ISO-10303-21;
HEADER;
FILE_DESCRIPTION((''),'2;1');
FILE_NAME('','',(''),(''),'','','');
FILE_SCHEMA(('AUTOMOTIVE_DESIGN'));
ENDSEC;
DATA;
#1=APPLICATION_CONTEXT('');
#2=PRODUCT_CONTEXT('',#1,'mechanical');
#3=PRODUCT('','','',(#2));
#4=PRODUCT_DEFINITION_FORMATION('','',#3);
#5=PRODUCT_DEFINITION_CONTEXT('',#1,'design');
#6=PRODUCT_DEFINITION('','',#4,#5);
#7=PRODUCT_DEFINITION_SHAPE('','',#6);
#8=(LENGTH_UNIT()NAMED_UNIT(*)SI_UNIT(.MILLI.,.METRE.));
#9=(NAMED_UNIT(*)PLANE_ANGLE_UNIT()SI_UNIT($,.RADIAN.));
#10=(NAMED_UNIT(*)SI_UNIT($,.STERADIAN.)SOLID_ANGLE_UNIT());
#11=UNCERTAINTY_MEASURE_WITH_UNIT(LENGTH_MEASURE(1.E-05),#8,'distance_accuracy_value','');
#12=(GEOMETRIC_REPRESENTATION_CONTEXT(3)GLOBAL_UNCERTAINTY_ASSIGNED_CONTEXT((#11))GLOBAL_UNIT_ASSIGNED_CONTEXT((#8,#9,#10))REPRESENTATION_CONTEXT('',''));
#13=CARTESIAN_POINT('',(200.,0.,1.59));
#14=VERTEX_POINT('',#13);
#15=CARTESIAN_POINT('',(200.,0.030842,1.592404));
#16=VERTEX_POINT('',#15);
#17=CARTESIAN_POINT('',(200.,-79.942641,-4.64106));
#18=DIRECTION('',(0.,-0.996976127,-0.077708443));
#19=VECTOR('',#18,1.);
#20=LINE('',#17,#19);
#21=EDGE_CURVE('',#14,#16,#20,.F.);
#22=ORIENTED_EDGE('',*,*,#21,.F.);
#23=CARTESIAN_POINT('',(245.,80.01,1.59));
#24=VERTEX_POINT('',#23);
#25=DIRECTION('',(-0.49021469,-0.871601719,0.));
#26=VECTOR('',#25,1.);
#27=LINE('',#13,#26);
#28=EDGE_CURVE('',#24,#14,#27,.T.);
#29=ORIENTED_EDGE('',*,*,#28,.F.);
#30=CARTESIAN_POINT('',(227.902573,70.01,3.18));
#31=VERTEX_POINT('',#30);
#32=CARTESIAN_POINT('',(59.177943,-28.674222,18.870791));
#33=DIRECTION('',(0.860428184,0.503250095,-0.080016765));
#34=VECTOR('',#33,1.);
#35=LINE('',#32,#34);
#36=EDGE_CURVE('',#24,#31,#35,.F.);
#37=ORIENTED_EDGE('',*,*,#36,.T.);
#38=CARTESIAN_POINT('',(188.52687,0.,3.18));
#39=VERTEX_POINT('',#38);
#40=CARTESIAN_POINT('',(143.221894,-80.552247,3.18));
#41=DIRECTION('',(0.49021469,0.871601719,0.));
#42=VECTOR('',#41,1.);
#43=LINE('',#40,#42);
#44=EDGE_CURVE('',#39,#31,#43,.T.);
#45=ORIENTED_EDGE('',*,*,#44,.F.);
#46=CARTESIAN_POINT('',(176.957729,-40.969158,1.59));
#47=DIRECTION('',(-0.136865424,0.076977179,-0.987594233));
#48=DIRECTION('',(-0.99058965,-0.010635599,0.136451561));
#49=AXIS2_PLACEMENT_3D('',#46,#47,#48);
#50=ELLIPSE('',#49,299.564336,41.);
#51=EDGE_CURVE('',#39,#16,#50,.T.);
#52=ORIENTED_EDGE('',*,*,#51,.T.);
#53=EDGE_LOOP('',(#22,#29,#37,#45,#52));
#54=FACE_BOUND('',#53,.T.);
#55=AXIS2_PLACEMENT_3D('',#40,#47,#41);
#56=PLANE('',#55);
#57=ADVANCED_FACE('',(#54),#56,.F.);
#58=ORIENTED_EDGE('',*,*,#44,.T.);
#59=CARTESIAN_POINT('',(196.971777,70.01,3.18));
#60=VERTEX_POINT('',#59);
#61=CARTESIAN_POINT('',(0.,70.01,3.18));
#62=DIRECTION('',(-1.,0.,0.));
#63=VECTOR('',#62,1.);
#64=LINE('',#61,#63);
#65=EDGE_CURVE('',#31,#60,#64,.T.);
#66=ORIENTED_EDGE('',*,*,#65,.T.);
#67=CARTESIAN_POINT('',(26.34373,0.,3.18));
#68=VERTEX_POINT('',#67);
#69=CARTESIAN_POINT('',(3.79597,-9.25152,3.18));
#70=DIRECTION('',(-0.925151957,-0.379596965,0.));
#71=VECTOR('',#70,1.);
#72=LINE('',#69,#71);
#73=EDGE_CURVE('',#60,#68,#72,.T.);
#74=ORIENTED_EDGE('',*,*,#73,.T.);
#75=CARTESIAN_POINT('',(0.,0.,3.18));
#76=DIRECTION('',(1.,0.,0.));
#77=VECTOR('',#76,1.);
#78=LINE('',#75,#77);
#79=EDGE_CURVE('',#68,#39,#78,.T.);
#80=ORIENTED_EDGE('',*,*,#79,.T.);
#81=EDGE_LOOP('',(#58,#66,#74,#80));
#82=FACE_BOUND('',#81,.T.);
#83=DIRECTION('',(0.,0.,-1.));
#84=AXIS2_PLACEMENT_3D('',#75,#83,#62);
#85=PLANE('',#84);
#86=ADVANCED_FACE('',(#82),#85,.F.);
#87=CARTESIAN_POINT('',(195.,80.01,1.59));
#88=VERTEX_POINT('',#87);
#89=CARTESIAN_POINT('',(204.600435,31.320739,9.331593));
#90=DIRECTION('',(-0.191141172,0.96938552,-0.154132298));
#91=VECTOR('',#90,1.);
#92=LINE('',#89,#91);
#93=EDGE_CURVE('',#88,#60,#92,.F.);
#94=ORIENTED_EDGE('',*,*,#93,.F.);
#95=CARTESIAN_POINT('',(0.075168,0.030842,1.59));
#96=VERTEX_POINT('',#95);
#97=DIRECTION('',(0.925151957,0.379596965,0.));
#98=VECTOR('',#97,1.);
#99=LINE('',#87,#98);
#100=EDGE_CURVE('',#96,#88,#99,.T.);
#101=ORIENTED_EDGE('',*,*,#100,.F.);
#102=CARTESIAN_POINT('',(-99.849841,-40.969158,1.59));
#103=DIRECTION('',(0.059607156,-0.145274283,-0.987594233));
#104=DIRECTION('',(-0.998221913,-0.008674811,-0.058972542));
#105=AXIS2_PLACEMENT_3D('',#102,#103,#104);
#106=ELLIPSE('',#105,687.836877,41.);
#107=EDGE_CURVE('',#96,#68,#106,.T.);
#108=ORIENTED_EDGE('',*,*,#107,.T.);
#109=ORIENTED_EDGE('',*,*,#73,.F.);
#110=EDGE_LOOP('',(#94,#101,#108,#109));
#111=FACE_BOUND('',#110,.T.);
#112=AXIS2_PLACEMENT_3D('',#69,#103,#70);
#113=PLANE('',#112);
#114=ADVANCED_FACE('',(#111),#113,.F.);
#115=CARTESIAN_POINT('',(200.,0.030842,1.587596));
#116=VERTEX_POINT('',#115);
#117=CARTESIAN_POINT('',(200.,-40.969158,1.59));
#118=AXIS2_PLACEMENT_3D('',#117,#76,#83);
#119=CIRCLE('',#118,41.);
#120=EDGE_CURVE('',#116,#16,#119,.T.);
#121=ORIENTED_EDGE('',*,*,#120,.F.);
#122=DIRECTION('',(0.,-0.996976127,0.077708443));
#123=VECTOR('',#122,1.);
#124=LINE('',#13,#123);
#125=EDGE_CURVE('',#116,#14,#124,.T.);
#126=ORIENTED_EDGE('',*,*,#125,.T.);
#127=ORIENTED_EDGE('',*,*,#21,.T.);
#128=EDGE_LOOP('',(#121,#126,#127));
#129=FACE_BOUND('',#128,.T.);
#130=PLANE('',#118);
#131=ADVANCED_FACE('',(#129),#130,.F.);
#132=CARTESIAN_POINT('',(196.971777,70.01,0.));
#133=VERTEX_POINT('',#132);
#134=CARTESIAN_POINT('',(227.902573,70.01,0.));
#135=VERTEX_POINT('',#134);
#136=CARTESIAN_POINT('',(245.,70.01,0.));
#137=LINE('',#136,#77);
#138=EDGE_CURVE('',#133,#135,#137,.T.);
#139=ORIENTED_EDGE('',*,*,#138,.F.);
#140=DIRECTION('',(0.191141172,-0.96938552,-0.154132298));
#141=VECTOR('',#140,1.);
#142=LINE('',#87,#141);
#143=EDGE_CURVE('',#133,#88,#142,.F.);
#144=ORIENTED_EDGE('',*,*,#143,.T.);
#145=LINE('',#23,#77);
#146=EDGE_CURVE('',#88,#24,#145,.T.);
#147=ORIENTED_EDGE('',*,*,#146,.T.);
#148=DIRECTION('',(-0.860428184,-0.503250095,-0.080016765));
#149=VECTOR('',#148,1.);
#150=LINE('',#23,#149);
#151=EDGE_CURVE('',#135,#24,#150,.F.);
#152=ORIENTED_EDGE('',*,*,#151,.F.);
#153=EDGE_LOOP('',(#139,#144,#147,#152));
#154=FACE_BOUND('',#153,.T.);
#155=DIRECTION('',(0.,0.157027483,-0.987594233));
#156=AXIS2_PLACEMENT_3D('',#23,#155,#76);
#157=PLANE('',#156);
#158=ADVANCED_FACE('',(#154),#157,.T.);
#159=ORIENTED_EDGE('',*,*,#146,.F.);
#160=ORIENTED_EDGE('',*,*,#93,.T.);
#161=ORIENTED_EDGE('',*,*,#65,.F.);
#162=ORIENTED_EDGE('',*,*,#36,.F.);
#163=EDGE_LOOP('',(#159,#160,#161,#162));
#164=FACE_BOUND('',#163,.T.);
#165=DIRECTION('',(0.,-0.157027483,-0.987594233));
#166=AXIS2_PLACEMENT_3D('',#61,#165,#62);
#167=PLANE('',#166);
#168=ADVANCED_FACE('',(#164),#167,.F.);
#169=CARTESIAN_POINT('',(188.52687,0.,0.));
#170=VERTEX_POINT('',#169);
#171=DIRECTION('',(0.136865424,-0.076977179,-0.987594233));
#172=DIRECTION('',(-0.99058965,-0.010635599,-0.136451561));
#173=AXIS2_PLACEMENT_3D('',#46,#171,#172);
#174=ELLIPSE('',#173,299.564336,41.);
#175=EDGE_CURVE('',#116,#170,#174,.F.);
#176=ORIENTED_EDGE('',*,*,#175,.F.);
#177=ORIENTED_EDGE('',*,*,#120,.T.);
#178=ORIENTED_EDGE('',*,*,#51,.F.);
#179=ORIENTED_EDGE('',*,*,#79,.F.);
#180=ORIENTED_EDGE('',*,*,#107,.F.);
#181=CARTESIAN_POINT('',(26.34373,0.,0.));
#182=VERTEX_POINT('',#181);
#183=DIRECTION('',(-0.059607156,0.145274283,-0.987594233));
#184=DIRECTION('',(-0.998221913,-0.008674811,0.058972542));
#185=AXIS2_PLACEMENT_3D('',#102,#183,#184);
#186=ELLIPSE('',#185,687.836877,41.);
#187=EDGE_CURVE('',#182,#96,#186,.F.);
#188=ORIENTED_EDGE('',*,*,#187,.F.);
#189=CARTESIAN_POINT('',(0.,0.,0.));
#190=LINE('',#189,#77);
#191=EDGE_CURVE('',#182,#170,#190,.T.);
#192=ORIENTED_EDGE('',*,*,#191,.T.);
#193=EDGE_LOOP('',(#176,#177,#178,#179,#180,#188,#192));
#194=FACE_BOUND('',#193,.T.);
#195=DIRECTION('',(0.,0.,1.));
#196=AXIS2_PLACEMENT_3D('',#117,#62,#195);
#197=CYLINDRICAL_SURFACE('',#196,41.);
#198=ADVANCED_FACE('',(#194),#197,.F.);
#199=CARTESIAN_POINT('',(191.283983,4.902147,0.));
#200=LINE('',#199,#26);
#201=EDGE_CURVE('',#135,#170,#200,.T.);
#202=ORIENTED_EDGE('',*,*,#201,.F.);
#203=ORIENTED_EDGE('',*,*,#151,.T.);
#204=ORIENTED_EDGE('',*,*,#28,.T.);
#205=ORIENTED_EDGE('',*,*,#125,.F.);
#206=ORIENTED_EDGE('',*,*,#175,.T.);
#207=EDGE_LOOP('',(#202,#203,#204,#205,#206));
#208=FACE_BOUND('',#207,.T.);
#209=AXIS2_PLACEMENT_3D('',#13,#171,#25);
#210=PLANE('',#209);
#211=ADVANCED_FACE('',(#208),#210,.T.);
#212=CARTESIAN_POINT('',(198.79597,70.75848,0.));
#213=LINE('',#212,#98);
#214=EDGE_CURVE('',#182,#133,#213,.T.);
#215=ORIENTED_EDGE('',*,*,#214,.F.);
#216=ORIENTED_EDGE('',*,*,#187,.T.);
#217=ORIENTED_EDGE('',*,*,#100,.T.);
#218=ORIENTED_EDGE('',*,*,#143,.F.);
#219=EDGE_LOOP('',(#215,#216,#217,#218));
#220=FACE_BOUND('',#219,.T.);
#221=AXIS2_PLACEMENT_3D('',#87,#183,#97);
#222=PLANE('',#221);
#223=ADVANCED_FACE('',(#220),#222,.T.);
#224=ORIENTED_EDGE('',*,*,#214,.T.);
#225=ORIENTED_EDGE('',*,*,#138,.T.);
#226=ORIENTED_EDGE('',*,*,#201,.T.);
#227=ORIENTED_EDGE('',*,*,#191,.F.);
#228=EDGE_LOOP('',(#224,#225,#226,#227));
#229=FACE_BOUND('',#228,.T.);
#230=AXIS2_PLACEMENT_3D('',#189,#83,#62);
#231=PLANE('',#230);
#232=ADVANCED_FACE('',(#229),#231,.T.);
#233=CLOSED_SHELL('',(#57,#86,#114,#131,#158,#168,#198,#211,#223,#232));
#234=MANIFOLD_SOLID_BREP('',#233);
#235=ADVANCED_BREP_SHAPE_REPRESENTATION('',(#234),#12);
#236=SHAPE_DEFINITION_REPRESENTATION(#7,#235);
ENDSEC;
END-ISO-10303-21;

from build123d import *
from OCP.BRepFilletAPI import BRepFilletAPI_MakeChamfer

# Parameters (mm, degrees)
BOSS_EXTRUDE1_DEPTH = 3.18
CHAMFER1_SIZE       = 1.59
CHAMFER1_SIZE2      = 10
CHAMFER2_SIZE       = 10
CHAMFER2_SIZE_2     = 1.59
SKETCH2_R           = 41
CUT_EXTRUDE1_DEPTH  = 200


with BuildPart() as part:
    # Sketch1 → Boss-Extrude1 (new body)
    with BuildSketch(Plane.XY):
        Polygon((0, 0), (200, 0), (245, 80.01), (195, 80.01), align=None)
    extrude(amount=BOSS_EXTRUDE1_DEPTH)

    # Chamfer1: one chamfer whose edges measure the first distance from different faces: ONE call of the kernel's chamfer builder (chamfer() names one face for all edges)
    chamfer1_edges_1 = [part.edges().sort_by_distance(p)[0] for p in [
        (222.5, 40.005, 3.18),
    ]]
    chamfer1_side_1 = [part.faces().sort_by_distance(p)[0] for p in [
        (222.5, 40.005, 1.59),
    ]]
    chamfer1_edges_2 = [part.edges().sort_by_distance(p)[0] for p in [
        (220, 80.01, 3.18),
    ]]
    chamfer1_side_2 = [part.faces().sort_by_distance(p)[0] for p in [
        (220, 80.01, 1.59),
    ]]
    chamfer1_edges_3 = [part.edges().sort_by_distance(p)[0] for p in [
        (97.5, 40.005, 3.18),
    ]]
    chamfer1_side_3 = [part.faces().sort_by_distance(p)[0] for p in [
        (97.5, 40.005, 1.59),
    ]]
    chamfer1 = BRepFilletAPI_MakeChamfer(part.part.solid().wrapped)
    for e in chamfer1_edges_1:
        chamfer1.Add(CHAMFER1_SIZE, CHAMFER1_SIZE2, e.wrapped, chamfer1_side_1[0].wrapped)  # the first distance lies on this face
    for e in chamfer1_edges_2:
        chamfer1.Add(CHAMFER1_SIZE, CHAMFER1_SIZE2, e.wrapped, chamfer1_side_2[0].wrapped)  # the first distance lies on this face
    for e in chamfer1_edges_3:
        chamfer1.Add(CHAMFER1_SIZE, CHAMFER1_SIZE2, e.wrapped, chamfer1_side_3[0].wrapped)  # the first distance lies on this face
    add(Compound.cast(chamfer1.Shape()), mode=Mode.REPLACE)

    # Chamfer2
    # the kernel refuses this chamfer: 10, 1.59 mm, written as the material it takes off along each edge
    with BuildSketch(Plane(origin=(187.260266978, -22.651245312, 0), x_dir=(-0.8715858085324353, 0.49020574158179714, -0.006042291378384645), z_dir=(0.4902146903574218, 0.8716017194554959, 0))) as chamfer2_piece_1:
        Polygon((CHAMFER2_SIZE * 0.999981745191, CHAMFER2_SIZE * 0.00604229137838), (-CHAMFER2_SIZE_2 * 0.00604229137837, CHAMFER2_SIZE_2 * 0.999981745191), (0, 0), align=None)
    extrude(amount=143.772651921, mode=Mode.SUBTRACT)
    with BuildSketch(Plane(origin=(219.042912573, 89.874991974, 0), x_dir=(-0.0882418861116751, 0.21506271455788833, 0.9726054690070617), z_dir=(-0.9251519574595215, -0.3795969646991606, 0))) as chamfer2_piece_2:
        Polygon((CHAMFER2_SIZE_2 * 0.972605469007, -CHAMFER2_SIZE_2 * 0.232462043477), (-CHAMFER2_SIZE * 0.232462043477, -CHAMFER2_SIZE * 0.972605469007), (0, 0), align=None)
    extrude(amount=262.752322131, mode=Mode.SUBTRACT)
    with BuildSketch(Plane(origin=(270.98806864, 80.01, 0), x_dir=(0, -0.9999817451908304, -0.006042291378384625), z_dir=(-1, 0, 0))) as chamfer2_piece_3:
        Polygon((CHAMFER2_SIZE * 0.999981745191, CHAMFER2_SIZE * 0.00604229137838), (-CHAMFER2_SIZE_2 * 0.00604229137838, CHAMFER2_SIZE_2 * 0.999981745191), (0, 0), align=None)
    extrude(amount=101.976137281, mode=Mode.SUBTRACT)

    # Sketch2 → Cut-Extrude1 (cut)
    with BuildSketch(Plane(origin=(0, 0, 0), x_dir=(0, 0, -1), z_dir=(1, 0, 0))):
        with Locations((-1.59, -40.969157912)):
            Circle(SKETCH2_R)
    extrude(amount=CUT_EXTRUDE1_DEPTH, mode=Mode.SUBTRACT)


solid = part.part
